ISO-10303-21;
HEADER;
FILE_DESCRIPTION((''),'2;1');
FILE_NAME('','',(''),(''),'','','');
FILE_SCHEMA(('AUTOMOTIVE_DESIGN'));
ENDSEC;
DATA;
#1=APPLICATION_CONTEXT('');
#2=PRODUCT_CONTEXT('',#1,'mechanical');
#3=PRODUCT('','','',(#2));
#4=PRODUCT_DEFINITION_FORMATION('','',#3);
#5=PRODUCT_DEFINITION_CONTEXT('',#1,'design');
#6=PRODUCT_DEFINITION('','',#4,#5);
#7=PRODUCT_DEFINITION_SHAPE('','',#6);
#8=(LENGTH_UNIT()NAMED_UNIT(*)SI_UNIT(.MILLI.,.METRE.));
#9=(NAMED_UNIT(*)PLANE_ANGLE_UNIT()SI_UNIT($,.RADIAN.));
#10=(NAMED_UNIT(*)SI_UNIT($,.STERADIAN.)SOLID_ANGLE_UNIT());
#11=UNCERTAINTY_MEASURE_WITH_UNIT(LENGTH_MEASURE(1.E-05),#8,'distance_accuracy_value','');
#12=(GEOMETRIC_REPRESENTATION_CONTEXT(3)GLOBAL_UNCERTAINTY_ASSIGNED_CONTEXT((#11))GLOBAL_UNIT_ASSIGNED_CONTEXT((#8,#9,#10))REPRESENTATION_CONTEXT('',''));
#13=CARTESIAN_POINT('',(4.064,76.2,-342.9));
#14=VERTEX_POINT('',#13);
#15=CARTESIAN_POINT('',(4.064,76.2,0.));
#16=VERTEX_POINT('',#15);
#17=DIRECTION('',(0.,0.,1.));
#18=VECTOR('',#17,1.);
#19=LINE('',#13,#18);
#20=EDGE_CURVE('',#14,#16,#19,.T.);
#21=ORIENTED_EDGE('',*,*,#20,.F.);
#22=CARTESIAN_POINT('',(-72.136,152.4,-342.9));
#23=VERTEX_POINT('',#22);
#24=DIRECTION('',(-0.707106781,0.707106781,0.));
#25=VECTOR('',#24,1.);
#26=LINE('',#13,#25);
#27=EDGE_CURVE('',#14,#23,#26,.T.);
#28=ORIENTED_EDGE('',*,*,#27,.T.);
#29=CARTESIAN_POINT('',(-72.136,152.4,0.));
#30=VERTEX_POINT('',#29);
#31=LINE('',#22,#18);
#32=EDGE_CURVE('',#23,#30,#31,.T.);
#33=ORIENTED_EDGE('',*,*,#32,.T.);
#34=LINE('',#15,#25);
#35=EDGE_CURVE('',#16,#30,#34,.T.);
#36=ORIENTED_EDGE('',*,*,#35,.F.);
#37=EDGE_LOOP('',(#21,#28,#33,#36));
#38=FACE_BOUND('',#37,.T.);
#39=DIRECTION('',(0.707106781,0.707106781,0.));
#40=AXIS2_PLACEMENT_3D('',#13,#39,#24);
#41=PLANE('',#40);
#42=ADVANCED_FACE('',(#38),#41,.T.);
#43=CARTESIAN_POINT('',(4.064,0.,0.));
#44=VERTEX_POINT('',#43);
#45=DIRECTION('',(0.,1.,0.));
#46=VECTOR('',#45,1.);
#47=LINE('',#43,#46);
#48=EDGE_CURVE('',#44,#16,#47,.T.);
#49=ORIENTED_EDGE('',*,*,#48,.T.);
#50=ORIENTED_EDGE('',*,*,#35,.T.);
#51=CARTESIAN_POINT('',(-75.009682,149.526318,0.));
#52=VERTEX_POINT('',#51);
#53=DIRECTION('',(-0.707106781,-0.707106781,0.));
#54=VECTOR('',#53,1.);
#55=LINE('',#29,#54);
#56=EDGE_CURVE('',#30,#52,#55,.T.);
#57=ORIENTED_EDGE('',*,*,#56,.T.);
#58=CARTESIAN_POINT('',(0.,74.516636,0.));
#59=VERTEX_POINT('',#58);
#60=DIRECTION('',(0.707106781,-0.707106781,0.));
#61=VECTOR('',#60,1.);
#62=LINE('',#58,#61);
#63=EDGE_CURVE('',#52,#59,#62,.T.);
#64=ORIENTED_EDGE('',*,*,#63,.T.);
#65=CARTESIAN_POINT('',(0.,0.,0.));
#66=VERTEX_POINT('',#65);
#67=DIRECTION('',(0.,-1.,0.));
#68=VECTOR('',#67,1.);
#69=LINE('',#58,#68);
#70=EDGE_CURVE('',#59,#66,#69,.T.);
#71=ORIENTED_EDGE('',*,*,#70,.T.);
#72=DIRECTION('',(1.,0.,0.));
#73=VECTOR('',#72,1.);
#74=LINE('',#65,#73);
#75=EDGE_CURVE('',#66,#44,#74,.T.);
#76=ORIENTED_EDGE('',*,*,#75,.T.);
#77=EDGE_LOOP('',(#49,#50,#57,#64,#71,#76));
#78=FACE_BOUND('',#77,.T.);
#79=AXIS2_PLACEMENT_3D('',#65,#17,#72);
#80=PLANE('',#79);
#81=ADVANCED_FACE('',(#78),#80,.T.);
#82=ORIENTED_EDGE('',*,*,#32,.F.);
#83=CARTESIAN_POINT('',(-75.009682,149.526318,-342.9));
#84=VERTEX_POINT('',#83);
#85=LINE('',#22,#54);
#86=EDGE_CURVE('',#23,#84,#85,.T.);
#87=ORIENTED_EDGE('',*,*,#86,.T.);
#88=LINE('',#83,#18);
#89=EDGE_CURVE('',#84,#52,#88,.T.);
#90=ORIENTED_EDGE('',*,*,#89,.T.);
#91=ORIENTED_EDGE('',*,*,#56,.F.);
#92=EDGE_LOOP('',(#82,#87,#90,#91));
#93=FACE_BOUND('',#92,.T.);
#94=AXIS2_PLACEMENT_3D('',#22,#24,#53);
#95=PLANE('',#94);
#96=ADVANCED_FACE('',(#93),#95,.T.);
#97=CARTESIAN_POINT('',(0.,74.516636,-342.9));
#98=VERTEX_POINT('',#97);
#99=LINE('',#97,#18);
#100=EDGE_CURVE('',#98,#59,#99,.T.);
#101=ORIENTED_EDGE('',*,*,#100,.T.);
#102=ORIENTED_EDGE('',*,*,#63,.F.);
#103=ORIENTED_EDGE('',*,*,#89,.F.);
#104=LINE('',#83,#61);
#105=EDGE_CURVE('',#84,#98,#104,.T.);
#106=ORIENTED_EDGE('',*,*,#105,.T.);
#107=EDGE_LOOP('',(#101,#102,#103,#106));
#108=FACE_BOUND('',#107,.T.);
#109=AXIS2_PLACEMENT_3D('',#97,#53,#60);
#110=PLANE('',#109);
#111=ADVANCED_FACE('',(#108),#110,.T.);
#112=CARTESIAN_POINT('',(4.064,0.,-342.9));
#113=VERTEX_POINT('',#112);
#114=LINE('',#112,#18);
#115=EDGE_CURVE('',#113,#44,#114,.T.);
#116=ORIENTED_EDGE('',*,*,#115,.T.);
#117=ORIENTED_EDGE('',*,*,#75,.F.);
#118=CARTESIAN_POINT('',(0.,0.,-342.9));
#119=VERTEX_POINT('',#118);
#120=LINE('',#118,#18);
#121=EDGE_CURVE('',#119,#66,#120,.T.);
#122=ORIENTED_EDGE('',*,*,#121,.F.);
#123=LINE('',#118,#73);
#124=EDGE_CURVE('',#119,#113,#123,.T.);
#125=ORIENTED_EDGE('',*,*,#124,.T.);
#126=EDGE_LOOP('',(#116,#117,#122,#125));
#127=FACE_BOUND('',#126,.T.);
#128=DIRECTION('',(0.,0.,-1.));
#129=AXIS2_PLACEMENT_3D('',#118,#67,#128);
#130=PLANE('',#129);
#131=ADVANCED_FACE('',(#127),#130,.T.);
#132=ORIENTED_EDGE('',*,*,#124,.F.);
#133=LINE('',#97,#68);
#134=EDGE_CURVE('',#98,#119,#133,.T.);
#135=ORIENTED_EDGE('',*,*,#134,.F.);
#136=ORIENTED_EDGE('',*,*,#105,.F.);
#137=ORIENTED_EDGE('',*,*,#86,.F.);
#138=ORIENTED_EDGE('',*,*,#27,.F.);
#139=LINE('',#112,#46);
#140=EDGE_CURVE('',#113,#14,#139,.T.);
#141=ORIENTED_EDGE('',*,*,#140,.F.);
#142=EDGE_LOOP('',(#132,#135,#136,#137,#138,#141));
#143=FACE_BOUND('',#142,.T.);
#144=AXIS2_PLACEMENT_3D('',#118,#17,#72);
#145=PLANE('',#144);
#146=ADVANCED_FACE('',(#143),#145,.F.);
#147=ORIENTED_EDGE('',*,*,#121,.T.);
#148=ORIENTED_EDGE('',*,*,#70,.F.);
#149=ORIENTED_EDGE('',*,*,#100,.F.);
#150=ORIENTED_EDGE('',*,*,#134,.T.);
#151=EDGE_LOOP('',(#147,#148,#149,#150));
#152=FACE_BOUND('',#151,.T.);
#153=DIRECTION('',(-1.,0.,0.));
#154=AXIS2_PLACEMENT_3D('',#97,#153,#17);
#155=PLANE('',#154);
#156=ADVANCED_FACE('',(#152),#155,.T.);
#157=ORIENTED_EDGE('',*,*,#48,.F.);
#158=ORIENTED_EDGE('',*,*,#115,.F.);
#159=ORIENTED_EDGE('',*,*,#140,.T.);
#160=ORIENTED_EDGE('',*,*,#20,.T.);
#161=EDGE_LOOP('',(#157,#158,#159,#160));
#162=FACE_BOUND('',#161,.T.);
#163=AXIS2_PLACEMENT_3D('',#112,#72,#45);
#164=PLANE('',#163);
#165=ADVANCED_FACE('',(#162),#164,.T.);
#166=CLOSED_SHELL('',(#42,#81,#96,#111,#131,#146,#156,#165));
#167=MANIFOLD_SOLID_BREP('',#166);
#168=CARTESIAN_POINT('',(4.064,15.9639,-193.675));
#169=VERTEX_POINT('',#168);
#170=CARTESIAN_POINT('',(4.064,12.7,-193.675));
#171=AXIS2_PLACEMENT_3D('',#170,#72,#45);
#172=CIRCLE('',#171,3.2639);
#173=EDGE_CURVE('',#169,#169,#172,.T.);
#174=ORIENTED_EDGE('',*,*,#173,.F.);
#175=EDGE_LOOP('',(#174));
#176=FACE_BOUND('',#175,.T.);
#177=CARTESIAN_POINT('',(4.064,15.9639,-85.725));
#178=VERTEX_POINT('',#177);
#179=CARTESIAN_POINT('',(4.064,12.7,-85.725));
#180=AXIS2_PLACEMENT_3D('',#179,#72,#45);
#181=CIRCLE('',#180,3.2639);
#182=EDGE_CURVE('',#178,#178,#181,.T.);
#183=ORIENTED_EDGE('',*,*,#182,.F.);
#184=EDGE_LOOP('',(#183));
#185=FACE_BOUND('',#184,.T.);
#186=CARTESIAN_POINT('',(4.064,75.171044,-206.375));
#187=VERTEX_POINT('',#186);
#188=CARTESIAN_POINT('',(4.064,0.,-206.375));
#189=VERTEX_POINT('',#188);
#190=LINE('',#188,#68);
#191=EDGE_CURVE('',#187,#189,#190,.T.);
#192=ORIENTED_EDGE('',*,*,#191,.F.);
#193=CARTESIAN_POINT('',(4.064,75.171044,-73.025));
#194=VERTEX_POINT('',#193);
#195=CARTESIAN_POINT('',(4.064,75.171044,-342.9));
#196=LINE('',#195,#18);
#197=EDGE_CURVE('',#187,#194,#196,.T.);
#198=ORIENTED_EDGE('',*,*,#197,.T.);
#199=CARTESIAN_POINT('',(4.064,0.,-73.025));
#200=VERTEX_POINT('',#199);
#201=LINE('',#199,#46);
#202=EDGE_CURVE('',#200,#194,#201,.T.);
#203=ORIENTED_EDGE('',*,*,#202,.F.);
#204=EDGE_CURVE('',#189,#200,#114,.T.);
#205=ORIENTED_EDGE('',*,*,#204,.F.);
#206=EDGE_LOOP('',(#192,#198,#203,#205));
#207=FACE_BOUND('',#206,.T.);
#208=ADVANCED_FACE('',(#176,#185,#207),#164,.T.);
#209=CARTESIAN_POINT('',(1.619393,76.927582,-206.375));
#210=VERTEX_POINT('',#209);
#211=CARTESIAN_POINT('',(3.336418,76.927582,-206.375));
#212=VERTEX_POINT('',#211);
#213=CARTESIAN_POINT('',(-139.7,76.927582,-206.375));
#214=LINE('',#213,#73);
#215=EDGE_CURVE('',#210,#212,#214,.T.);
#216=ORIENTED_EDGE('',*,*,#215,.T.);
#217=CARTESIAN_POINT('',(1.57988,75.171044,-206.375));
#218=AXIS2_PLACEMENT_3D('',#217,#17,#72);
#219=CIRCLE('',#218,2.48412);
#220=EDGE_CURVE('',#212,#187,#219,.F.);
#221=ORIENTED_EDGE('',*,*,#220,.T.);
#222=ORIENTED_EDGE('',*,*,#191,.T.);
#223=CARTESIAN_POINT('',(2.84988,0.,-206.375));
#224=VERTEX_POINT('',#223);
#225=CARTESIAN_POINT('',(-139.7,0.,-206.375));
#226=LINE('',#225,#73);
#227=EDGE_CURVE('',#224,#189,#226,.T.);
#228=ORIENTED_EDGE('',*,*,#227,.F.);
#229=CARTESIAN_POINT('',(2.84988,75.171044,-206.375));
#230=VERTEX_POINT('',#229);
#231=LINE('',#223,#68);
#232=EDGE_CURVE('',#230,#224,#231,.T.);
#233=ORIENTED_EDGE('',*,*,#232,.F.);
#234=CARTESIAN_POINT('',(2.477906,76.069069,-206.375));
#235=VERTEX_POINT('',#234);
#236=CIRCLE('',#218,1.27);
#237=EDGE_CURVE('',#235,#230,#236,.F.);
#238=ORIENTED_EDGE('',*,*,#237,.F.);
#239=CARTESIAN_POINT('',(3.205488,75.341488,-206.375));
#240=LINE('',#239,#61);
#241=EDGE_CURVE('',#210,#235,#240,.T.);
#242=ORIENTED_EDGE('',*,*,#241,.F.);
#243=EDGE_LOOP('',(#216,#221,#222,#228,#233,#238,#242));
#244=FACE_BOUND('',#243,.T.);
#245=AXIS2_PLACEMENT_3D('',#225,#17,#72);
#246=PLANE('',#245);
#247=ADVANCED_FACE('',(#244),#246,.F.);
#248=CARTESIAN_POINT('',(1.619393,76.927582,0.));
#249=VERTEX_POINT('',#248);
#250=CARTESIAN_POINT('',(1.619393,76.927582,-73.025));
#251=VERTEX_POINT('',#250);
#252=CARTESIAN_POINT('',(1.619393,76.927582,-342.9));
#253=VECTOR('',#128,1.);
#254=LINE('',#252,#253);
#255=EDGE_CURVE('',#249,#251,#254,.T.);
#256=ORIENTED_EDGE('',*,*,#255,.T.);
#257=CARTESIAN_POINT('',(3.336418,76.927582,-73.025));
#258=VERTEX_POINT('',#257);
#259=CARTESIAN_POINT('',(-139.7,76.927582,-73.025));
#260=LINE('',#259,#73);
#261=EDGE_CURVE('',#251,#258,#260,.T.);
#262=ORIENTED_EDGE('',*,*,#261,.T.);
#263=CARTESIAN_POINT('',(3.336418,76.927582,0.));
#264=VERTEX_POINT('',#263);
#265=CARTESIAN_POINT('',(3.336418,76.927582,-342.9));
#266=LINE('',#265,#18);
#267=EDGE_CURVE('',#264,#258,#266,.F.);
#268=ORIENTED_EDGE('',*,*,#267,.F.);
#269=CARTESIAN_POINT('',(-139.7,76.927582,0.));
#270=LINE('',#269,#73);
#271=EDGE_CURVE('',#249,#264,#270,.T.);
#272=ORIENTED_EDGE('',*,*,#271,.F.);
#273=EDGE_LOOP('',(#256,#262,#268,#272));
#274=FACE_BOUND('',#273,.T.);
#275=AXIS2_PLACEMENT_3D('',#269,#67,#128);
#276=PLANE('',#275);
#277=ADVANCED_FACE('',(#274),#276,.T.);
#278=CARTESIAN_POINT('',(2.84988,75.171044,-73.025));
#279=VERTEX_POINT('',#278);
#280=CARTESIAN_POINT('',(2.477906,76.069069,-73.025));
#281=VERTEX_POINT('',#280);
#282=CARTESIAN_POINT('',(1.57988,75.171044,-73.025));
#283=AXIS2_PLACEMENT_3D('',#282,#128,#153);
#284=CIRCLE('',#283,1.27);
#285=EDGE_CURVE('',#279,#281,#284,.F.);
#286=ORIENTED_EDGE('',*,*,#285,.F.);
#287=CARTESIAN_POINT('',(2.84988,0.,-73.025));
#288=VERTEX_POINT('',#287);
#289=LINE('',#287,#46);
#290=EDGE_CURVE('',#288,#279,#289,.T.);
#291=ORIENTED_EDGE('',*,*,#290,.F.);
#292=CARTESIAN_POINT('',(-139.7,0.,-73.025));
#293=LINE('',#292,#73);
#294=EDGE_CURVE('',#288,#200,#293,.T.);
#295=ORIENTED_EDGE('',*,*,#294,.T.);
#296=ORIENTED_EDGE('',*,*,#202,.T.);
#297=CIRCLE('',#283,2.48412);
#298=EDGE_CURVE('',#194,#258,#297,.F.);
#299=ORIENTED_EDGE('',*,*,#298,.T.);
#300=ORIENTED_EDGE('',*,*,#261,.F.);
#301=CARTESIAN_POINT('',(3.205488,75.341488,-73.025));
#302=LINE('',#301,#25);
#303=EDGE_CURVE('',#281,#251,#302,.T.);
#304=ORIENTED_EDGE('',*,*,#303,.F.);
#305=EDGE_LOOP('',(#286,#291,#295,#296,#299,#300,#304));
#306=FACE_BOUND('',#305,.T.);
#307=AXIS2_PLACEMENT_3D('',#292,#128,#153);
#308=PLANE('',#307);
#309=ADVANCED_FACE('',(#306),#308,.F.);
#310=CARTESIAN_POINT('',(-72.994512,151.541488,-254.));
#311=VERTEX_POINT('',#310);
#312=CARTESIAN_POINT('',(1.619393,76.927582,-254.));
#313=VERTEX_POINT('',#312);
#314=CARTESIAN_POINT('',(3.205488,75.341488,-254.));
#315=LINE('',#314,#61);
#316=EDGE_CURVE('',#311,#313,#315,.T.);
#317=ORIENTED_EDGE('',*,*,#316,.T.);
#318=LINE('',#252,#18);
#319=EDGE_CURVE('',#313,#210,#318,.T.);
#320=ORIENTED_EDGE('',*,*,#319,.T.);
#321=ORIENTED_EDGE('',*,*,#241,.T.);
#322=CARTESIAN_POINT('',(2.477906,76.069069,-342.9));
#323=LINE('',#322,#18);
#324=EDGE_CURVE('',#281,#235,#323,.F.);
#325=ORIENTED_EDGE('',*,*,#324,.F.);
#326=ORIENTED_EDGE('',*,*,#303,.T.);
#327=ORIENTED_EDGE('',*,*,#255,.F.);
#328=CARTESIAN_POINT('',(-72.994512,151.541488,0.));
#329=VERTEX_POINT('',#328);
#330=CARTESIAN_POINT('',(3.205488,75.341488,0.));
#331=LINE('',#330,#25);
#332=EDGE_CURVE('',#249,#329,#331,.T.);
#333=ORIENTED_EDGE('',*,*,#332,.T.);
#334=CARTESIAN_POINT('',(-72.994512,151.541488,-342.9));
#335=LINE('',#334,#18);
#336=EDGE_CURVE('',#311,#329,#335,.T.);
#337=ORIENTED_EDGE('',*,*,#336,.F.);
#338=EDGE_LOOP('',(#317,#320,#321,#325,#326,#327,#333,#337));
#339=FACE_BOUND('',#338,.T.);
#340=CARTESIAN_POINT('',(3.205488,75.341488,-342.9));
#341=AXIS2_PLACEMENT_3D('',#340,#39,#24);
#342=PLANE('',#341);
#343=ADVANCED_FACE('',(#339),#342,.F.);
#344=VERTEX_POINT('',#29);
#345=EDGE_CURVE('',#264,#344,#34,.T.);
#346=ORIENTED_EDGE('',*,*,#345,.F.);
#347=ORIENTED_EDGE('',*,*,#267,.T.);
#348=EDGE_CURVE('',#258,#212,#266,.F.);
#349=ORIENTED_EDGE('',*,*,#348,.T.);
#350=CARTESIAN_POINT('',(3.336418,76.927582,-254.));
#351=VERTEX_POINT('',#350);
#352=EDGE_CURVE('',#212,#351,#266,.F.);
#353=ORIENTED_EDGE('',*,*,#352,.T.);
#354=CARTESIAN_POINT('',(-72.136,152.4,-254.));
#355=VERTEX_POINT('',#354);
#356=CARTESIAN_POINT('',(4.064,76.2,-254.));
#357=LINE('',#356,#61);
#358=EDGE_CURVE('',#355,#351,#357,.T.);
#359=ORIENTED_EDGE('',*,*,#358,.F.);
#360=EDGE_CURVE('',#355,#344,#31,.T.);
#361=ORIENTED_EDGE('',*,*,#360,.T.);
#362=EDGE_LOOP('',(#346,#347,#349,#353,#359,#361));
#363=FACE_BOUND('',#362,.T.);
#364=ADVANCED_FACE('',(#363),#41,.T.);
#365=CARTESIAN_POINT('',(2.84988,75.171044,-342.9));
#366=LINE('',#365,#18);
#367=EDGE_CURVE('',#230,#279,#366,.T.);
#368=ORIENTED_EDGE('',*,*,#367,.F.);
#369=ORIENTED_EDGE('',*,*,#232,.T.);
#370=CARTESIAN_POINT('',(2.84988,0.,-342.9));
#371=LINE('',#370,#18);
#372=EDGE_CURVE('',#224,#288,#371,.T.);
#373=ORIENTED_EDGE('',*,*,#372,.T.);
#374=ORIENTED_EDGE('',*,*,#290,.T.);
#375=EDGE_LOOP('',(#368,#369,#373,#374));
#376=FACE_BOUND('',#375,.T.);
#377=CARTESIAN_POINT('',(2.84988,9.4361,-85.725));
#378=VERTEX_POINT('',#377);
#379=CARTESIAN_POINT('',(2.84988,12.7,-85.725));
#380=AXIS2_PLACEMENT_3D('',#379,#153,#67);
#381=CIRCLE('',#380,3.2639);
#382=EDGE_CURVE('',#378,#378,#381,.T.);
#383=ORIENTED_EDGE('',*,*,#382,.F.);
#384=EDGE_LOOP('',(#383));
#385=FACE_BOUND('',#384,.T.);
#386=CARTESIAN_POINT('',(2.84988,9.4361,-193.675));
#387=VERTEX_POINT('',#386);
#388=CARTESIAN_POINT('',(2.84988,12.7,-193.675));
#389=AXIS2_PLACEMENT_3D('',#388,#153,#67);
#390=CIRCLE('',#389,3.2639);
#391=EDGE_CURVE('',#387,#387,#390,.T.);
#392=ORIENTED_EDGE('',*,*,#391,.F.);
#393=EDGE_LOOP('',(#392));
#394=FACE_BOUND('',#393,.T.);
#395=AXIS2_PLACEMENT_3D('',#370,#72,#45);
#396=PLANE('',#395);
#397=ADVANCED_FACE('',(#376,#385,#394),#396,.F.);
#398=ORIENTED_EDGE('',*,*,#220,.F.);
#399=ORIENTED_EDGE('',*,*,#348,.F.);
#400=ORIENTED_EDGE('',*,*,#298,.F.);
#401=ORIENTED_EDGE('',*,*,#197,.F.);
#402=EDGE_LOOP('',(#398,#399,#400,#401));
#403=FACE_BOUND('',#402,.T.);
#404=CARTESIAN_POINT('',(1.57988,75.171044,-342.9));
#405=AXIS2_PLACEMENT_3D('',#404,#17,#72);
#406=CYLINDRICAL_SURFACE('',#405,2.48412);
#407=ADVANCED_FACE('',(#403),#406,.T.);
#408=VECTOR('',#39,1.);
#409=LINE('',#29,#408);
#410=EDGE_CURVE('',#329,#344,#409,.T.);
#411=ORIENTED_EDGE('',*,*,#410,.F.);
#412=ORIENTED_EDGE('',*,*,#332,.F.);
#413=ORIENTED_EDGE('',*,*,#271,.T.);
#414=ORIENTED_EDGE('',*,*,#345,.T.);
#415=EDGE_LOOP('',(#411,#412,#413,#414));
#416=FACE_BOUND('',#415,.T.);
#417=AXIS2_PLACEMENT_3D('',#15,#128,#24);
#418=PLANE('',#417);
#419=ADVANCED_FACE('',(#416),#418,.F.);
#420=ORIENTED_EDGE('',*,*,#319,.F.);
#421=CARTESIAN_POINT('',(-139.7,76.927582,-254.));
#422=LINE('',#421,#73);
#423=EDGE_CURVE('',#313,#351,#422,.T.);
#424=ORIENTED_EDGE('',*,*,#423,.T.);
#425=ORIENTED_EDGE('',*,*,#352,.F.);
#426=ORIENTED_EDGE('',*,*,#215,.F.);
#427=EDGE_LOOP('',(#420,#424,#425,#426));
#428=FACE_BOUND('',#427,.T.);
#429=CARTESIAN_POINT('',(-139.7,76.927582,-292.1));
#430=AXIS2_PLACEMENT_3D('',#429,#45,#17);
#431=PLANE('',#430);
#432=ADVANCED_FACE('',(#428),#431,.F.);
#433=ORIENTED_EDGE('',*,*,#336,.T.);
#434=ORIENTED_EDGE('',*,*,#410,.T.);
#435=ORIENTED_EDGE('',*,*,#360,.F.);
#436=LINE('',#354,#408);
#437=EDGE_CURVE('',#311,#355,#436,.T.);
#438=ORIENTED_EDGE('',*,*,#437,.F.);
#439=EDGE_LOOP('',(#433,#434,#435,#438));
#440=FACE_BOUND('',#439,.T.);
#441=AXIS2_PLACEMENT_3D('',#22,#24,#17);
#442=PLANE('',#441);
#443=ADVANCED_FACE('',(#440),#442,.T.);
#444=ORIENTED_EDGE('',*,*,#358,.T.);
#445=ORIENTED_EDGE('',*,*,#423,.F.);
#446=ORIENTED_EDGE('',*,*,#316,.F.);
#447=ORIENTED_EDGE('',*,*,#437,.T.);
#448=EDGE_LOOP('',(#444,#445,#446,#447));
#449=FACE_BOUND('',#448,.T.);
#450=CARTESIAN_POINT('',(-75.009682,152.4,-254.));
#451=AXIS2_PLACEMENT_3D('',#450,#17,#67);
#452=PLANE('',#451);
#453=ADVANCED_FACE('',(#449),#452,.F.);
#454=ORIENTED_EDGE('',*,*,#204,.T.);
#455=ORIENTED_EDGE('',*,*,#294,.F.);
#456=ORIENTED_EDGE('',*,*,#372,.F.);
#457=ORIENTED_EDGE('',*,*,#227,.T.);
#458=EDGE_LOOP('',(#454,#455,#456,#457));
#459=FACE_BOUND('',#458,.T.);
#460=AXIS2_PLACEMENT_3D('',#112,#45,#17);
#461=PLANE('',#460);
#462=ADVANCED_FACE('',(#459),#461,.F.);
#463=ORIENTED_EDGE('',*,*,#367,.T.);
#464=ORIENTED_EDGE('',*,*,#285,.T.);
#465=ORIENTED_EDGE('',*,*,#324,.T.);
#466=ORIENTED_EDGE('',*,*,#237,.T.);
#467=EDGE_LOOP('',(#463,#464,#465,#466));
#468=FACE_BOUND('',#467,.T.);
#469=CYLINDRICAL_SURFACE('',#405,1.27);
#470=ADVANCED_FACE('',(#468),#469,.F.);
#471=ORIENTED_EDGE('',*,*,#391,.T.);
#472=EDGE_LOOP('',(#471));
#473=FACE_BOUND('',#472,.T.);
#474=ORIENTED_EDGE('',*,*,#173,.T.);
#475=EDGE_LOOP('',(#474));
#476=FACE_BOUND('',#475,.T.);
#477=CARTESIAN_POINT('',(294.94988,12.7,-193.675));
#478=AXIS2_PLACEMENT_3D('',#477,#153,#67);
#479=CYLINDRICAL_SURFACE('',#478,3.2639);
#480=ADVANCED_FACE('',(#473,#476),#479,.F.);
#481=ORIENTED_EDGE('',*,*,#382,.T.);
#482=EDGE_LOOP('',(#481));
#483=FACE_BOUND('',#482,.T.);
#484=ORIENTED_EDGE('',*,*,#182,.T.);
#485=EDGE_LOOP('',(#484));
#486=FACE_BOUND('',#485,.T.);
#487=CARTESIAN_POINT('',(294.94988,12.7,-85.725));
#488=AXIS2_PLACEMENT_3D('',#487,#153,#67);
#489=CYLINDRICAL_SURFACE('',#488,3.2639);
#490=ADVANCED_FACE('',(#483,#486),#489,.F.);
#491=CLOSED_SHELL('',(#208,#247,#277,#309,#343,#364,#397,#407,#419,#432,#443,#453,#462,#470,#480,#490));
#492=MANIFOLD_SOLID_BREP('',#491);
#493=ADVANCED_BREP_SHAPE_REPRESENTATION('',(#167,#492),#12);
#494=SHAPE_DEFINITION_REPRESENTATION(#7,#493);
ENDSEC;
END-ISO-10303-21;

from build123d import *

# Parameters (mm, degrees)
BOSS_EXTRUDE2_DEPTH  = 342.9
CONVERT_SOLID2_START = -342.9
CONVERT_SOLID2_DEPTH = 342.9
SKETCH12_W           = 73.025
SKETCH12_H           = 76.927581903
CUT_EXTRUDE1_DEPTH   = 292.1
SKETCH13_W           = 85.725
SKETCH13_H           = 76.927581903
CUT_EXTRUDE2_DEPTH   = 292.1
SKETCH14_R           = 3.2639
CUT_EXTRUDE3_DEPTH   = 292.1
SKETCH18_W           = 50.8
SKETCH18_H           = 76.927581903
CUT_EXTRUDE4_DEPTH   = 439.772530417
SKETCH21_W           = 63.5
SKETCH21_H           = 100.852216804
CUT_EXTRUDE11_DEPTH  = 439.772530417
SKETCH22_W           = 25.4
SKETCH22_H           = 168.264198316
CUT_EXTRUDE13_DEPTH  = 439.772530417


# Read off the part's stored shape, not the designer's step: Convert-Solid2
with BuildPart() as part:
    # Sketch7 → Boss-Extrude2 (new body)
    with BuildSketch(Plane.XY):
        Polygon((0, 0), (4.064, 0), (4.064, 76.2), (-72.136, 152.4), (-75.009681959, 149.526318041), (-74.603697881, 149.120333963), (0, 74.516636083), align=None)
    extrude(amount=-BOSS_EXTRUDE2_DEPTH)


with BuildPart() as body_2:
    # Convert-Solid2 outline → Convert-Solid2 (new body)
    with BuildSketch(Plane.XY.offset(CONVERT_SOLID2_START)):
        with BuildLine():
            Line((2.84988, 0), (4.064, 0))
            Line((4.064, 0), (4.064, 75.171043805))
            ThreePointArc((4.064, 75.171043805), (3.874907624, 76.121675373), (3.336418097, 76.927581903))
            Line((3.336418097, 76.927581903), (-72.136, 152.4))
            Line((-72.136, 152.4), (-72.994512485, 151.541487515))
            Line((-72.994512485, 151.541487515), (2.477905612, 76.069069418))
            ThreePointArc((2.477905612, 76.069069418), (2.753207006, 75.657051765), (2.84988, 75.171043805))
            Line((2.84988, 75.171043805), (2.84988, 0))
        make_face()
    extrude(amount=CONVERT_SOLID2_DEPTH)

    # Sketch12 → Cut-Extrude1 (cut)
    with BuildSketch(Plane(origin=(152.4, 0, 0), x_dir=(0, 0, -1), z_dir=(1, 0, 0))):
        with Locations((36.5125, 38.463790952)):
            Rectangle(SKETCH12_W, SKETCH12_H)
    extrude(amount=-CUT_EXTRUDE1_DEPTH, mode=Mode.SUBTRACT)

    # Sketch13 → Cut-Extrude2 (cut)
    with BuildSketch(Plane(origin=(152.4, 0, 0), x_dir=(0, 0, -1), z_dir=(1, 0, 0))):
        with Locations((249.2375, 38.463790952)):
            Rectangle(SKETCH13_W, SKETCH13_H)
    extrude(amount=-CUT_EXTRUDE2_DEPTH, mode=Mode.SUBTRACT)

    # Sketch14 → Cut-Extrude3 (cut)
    with BuildSketch(Plane.ZY.offset(-2.84988)):
        with Locations(Location((-193.675, 12.7, 0), (0, 0, 270))):
            Circle(SKETCH14_R)
        with Locations(Location((-85.725, 12.7, 0), (0, 0, 270))):
            Circle(SKETCH14_R)
    extrude(amount=-CUT_EXTRUDE3_DEPTH, mode=Mode.SUBTRACT)

    # Sketch18 → Cut-Extrude4 (cut, through all)
    with BuildSketch(Plane(origin=(152.4, 0, 0), x_dir=(0, 0, -1), z_dir=(1, 0, 0))):
        with Locations((317.5, 38.463790952)):
            Rectangle(SKETCH18_W, SKETCH18_H)
    extrude(amount=-CUT_EXTRUDE4_DEPTH, mode=Mode.SUBTRACT)

    # Sketch21 → Cut-Extrude11 (cut, through all)
    with BuildSketch(Plane(origin=(152.4, 0, 0), x_dir=(0, 0, -1), z_dir=(1, 0, 0))):
        with Locations((311.15, 127.353690305)):
            Rectangle(SKETCH21_W, SKETCH21_H)
    extrude(amount=-CUT_EXTRUDE11_DEPTH, mode=Mode.SUBTRACT)

    # Sketch22 → Cut-Extrude13 (cut, through all)
    with BuildSketch(Plane(origin=(152.4, 0, 0), x_dir=(0, 0, -1), z_dir=(1, 0, 0))):
        with Locations((266.7, 68.267900842)):
            Rectangle(SKETCH22_W, SKETCH22_H)
    extrude(amount=-CUT_EXTRUDE13_DEPTH, mode=Mode.SUBTRACT)


solid = Compound([part.part, body_2.part])
